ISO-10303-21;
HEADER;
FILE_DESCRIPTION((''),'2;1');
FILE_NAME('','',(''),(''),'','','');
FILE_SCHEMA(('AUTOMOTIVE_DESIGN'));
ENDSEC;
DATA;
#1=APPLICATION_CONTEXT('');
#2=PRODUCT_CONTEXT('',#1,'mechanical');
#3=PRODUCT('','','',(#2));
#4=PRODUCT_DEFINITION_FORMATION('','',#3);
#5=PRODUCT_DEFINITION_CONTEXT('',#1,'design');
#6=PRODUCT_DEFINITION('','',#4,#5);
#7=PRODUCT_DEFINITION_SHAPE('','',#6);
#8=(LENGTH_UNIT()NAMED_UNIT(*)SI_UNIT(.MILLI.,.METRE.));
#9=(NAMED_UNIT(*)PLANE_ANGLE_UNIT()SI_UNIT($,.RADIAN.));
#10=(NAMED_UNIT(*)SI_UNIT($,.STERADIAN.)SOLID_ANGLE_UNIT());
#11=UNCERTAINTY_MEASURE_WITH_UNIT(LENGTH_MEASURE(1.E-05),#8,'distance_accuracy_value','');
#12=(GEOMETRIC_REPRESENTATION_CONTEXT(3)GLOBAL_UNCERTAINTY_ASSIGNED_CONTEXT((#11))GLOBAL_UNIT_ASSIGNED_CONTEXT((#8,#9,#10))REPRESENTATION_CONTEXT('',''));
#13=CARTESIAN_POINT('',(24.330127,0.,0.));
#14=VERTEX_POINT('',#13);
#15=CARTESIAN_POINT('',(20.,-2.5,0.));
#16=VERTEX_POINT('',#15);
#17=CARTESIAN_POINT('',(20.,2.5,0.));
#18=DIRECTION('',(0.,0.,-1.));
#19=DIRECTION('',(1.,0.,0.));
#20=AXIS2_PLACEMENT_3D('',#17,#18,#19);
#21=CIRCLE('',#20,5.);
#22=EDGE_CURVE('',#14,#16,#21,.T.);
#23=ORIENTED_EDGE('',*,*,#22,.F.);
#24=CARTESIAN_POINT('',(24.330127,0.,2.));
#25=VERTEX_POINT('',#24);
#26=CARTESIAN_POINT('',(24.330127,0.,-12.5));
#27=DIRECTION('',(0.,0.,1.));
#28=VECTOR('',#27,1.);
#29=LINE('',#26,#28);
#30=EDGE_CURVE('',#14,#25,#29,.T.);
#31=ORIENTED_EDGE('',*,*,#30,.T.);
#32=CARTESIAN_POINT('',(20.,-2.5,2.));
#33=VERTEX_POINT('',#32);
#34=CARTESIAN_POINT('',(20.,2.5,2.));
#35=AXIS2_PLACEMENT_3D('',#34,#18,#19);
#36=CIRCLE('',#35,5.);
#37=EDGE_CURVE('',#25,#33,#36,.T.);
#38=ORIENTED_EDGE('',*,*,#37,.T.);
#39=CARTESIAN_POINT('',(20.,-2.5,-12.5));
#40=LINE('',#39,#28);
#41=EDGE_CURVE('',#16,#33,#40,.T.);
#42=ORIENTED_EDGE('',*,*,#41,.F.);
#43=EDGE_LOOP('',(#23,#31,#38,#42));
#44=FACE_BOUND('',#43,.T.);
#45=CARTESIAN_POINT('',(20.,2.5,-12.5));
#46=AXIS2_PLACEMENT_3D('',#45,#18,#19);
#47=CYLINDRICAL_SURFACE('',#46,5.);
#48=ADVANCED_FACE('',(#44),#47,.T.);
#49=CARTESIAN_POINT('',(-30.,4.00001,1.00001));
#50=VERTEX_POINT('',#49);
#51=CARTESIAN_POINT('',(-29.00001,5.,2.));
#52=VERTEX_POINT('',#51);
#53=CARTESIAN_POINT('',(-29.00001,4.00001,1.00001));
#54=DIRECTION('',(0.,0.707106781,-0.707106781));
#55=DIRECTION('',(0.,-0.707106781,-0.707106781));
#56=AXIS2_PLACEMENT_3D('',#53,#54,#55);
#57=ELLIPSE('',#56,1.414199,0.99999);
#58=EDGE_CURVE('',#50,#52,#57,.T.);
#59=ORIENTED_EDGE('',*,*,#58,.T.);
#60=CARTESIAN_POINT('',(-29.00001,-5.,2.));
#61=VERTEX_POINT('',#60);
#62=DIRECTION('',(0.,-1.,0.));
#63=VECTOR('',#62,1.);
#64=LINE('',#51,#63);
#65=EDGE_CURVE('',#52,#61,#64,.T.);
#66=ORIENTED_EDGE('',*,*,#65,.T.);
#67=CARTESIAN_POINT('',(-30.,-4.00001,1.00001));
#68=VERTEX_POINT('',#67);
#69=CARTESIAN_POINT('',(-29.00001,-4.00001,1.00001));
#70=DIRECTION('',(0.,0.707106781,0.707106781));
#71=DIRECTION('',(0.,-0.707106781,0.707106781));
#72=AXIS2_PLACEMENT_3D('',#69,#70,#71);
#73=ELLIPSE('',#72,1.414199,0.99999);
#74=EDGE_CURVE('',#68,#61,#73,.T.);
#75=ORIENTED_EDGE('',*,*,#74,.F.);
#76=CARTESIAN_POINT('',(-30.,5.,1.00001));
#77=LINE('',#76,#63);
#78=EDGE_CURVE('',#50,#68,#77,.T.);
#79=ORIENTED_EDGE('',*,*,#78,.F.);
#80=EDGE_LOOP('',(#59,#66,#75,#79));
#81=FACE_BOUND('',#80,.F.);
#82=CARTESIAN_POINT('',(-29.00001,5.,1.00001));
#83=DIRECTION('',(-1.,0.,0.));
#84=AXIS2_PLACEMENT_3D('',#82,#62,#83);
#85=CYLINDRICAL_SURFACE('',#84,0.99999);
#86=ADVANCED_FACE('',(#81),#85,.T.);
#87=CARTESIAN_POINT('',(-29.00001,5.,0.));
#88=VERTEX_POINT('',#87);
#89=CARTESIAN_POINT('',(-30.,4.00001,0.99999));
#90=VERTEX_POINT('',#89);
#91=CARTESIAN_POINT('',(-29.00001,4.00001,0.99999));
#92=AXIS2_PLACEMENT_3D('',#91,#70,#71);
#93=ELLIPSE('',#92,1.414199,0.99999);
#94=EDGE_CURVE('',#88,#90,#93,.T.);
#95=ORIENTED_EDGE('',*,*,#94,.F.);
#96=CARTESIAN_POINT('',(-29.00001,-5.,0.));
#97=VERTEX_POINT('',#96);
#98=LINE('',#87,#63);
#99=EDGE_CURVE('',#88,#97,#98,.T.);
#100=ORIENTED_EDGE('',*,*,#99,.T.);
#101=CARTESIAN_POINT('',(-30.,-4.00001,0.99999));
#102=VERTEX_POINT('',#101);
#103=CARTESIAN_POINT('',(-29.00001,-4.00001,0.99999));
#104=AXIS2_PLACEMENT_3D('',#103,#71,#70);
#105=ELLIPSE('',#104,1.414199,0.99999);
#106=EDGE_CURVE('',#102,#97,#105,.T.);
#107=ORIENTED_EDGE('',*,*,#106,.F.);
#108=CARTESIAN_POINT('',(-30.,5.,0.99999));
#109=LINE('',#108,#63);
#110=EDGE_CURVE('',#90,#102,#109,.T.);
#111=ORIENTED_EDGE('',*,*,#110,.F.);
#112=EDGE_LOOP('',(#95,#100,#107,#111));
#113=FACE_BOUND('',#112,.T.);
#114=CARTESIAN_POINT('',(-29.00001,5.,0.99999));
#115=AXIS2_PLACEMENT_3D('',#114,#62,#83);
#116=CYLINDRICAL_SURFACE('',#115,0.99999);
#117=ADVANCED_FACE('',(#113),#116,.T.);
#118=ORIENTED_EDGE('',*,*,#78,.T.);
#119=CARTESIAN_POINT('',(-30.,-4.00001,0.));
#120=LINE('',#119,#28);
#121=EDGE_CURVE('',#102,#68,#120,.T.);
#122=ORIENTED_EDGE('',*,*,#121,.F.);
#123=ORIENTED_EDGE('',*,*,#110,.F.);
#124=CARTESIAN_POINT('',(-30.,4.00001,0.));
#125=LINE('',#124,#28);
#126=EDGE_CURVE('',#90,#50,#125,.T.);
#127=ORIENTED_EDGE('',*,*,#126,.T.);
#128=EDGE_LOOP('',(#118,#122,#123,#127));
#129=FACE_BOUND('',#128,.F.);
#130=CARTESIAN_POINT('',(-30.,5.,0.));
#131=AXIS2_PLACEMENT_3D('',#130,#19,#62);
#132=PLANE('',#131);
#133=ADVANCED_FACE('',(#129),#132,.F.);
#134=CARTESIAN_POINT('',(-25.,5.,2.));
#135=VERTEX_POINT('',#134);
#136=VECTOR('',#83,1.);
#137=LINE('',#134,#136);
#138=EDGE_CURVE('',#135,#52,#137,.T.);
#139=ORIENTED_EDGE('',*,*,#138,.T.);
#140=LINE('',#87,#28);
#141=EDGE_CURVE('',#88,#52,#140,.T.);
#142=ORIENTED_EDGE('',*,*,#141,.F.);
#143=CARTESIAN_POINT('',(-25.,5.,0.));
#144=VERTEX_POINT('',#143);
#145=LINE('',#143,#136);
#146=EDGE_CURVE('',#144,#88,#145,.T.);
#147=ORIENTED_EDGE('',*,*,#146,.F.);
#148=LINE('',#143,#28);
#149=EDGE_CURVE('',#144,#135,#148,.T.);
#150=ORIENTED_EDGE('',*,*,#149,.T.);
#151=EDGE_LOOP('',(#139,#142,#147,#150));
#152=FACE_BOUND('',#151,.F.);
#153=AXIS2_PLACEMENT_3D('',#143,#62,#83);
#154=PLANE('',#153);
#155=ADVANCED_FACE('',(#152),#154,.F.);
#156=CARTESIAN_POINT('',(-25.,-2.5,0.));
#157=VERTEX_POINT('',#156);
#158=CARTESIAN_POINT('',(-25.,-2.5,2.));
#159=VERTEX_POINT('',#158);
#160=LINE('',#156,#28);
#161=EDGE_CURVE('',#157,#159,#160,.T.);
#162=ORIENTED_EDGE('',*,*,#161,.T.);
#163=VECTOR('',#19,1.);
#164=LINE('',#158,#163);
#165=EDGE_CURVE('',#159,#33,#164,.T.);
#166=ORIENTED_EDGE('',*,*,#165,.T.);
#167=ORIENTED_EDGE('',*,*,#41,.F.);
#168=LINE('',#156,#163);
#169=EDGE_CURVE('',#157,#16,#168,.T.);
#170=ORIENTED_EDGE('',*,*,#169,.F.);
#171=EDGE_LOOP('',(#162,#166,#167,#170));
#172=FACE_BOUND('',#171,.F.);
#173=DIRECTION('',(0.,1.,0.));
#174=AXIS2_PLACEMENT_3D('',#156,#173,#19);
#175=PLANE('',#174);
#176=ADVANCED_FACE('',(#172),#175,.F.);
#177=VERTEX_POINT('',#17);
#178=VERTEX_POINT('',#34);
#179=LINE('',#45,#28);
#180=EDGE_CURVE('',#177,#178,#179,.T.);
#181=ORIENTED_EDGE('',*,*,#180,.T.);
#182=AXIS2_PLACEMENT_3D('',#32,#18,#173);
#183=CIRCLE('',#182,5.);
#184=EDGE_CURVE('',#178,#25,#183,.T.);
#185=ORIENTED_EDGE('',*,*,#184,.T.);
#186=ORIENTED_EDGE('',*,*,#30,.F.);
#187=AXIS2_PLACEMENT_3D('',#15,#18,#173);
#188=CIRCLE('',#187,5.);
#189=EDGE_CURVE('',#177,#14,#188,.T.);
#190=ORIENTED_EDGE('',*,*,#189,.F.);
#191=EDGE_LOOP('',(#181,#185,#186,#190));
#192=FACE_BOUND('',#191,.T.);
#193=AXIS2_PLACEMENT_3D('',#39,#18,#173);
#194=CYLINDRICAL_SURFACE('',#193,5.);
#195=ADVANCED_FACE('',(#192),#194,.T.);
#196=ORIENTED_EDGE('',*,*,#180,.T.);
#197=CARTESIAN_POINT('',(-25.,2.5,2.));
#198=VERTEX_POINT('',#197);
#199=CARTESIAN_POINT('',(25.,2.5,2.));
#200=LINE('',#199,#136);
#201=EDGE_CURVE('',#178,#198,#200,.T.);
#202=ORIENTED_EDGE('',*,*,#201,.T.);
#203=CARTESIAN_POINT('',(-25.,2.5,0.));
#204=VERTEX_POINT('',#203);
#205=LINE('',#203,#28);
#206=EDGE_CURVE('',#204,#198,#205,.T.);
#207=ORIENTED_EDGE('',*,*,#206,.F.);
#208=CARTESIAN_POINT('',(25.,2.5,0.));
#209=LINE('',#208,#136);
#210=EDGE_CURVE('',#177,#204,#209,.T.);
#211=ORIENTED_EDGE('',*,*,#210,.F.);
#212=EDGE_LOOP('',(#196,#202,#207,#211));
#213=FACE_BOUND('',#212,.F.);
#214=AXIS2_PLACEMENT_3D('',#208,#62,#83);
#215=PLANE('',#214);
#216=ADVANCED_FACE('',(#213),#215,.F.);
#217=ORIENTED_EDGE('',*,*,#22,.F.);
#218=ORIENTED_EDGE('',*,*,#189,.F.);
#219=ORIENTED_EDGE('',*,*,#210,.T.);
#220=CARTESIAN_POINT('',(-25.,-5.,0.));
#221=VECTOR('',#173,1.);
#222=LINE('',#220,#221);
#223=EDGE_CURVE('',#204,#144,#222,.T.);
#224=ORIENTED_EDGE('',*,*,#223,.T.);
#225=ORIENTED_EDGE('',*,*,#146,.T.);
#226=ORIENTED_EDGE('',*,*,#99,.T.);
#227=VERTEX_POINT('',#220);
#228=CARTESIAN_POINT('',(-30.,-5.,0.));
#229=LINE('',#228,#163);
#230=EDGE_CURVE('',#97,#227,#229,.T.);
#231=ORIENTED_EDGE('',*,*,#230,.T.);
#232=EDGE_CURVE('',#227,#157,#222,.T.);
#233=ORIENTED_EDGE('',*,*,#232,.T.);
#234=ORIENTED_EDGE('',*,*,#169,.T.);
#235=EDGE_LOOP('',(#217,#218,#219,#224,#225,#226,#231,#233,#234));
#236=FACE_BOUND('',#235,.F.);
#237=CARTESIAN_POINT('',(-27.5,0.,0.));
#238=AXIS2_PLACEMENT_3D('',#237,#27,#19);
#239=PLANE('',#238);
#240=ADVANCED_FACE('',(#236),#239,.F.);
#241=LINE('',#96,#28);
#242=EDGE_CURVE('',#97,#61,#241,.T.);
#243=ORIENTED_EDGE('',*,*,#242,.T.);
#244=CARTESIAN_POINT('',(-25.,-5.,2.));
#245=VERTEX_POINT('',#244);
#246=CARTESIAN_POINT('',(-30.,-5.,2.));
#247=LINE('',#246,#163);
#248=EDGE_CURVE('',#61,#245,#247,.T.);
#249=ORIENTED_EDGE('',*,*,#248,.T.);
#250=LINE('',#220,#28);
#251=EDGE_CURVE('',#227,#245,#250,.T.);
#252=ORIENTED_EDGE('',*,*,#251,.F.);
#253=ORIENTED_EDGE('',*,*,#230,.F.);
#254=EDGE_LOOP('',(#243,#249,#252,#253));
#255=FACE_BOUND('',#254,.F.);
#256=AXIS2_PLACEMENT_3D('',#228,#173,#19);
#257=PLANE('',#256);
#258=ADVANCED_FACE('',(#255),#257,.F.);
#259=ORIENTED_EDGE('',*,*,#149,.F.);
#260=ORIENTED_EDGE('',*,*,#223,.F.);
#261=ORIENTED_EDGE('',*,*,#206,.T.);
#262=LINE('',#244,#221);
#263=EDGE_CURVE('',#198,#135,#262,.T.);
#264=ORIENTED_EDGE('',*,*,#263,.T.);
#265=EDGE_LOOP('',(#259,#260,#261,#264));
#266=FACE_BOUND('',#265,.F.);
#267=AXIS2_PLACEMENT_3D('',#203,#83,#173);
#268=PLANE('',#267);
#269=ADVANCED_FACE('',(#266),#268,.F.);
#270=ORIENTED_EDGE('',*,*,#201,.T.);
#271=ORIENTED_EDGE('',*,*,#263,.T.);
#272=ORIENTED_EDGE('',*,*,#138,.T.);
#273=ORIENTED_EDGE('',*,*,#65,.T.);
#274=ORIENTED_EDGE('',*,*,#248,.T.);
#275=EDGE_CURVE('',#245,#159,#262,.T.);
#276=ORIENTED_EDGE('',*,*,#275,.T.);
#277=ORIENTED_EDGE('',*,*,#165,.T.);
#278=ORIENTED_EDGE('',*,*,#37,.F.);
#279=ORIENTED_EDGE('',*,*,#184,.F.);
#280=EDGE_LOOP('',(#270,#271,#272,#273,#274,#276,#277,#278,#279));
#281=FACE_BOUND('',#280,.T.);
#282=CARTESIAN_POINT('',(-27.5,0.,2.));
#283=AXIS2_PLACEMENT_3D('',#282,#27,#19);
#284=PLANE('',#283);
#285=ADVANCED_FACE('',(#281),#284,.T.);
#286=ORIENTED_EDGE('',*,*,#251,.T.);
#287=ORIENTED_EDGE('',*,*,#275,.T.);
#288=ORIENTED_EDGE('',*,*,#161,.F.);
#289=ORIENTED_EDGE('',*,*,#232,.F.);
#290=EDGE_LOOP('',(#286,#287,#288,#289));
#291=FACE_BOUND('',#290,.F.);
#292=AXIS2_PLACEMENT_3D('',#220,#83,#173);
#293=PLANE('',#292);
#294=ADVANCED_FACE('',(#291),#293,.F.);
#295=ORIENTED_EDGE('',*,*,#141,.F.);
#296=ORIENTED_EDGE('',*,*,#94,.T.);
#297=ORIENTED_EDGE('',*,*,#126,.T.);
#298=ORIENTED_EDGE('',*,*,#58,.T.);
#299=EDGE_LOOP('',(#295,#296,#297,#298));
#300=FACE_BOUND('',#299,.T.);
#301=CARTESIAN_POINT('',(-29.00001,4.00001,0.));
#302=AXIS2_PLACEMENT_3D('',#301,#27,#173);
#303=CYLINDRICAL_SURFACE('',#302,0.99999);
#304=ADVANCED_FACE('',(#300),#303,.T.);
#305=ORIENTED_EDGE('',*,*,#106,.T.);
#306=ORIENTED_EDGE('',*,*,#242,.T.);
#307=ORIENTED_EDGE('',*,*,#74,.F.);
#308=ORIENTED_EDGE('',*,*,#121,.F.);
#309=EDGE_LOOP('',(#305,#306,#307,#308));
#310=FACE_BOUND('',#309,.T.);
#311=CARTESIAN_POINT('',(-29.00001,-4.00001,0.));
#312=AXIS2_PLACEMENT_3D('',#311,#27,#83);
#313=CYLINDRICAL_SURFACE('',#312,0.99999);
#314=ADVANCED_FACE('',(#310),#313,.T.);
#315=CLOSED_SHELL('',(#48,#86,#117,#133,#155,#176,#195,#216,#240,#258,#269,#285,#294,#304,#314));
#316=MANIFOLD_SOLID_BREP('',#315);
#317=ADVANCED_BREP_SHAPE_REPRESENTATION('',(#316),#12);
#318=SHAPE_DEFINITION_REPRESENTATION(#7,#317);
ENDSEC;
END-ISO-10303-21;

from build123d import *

# Parameters (mm, degrees)
F1_DEPTH    = 2
F2_R        = 0.99999
F3_T1_DEPTH = 27


# Not quite as in the source:
# - a fillet or chamfer that OpenCascade refuses, or shapes differently, is made with other operations: its cross-section is extruded or revolved along the edge and cut away or added
# - a fillet or chamfer is up to 0.001 mm smaller than in the source, because OpenCascade refuses the exact size


with BuildPart() as f1:
    # F0 (on Top) → F1 (new body)
    with BuildSketch(Plane.XY):
        Polygon((-25, 0), (-25, 2.5), (-25, 5), (-30, 5), (-30, -5), (-25, -5), (-25, -2.5), align=None)
        Polygon((25, -2.5), (25, 2.5), (-25, 2.5), (-25, 0), (-25, -2.5), align=None)
    extrude(amount=F1_DEPTH)

    # F2 (radius 1 in the source; OpenCascade refuses exactly that, so slightly less here)
    f2_edges = [f1.edges().sort_by_distance(p)[0] for p in [
        (-30, -5, 1),
        (-30, 0, 2),
        (-30, 5, 1),
        (-30, 0, 0),
    ]]
    fillet(f2_edges, radius=F2_R)

    # F3: fillet of radius 5 on 2 edges, made by hand

    # F3_s2 → F3_t1 (cut)
    with BuildSketch(Plane.XY.offset(-12.5)):
        with BuildLine():
            ThreePointArc((25, 2.5), (23.5355339059, -1.0355339059), (20, -2.5))
            Line((20, -2.5), (25, -2.5))
            Line((25, -2.5), (25, 2.5))
        make_face()
        with BuildLine():
            ThreePointArc((20, 2.5), (23.5355339059, 1.0355339059), (25, -2.5))
            Line((25, -2.5), (25, 2.5))
            Line((25, 2.5), (20, 2.5))
        make_face()
    extrude(amount=F3_T1_DEPTH, mode=Mode.SUBTRACT)


solid = f1.part
